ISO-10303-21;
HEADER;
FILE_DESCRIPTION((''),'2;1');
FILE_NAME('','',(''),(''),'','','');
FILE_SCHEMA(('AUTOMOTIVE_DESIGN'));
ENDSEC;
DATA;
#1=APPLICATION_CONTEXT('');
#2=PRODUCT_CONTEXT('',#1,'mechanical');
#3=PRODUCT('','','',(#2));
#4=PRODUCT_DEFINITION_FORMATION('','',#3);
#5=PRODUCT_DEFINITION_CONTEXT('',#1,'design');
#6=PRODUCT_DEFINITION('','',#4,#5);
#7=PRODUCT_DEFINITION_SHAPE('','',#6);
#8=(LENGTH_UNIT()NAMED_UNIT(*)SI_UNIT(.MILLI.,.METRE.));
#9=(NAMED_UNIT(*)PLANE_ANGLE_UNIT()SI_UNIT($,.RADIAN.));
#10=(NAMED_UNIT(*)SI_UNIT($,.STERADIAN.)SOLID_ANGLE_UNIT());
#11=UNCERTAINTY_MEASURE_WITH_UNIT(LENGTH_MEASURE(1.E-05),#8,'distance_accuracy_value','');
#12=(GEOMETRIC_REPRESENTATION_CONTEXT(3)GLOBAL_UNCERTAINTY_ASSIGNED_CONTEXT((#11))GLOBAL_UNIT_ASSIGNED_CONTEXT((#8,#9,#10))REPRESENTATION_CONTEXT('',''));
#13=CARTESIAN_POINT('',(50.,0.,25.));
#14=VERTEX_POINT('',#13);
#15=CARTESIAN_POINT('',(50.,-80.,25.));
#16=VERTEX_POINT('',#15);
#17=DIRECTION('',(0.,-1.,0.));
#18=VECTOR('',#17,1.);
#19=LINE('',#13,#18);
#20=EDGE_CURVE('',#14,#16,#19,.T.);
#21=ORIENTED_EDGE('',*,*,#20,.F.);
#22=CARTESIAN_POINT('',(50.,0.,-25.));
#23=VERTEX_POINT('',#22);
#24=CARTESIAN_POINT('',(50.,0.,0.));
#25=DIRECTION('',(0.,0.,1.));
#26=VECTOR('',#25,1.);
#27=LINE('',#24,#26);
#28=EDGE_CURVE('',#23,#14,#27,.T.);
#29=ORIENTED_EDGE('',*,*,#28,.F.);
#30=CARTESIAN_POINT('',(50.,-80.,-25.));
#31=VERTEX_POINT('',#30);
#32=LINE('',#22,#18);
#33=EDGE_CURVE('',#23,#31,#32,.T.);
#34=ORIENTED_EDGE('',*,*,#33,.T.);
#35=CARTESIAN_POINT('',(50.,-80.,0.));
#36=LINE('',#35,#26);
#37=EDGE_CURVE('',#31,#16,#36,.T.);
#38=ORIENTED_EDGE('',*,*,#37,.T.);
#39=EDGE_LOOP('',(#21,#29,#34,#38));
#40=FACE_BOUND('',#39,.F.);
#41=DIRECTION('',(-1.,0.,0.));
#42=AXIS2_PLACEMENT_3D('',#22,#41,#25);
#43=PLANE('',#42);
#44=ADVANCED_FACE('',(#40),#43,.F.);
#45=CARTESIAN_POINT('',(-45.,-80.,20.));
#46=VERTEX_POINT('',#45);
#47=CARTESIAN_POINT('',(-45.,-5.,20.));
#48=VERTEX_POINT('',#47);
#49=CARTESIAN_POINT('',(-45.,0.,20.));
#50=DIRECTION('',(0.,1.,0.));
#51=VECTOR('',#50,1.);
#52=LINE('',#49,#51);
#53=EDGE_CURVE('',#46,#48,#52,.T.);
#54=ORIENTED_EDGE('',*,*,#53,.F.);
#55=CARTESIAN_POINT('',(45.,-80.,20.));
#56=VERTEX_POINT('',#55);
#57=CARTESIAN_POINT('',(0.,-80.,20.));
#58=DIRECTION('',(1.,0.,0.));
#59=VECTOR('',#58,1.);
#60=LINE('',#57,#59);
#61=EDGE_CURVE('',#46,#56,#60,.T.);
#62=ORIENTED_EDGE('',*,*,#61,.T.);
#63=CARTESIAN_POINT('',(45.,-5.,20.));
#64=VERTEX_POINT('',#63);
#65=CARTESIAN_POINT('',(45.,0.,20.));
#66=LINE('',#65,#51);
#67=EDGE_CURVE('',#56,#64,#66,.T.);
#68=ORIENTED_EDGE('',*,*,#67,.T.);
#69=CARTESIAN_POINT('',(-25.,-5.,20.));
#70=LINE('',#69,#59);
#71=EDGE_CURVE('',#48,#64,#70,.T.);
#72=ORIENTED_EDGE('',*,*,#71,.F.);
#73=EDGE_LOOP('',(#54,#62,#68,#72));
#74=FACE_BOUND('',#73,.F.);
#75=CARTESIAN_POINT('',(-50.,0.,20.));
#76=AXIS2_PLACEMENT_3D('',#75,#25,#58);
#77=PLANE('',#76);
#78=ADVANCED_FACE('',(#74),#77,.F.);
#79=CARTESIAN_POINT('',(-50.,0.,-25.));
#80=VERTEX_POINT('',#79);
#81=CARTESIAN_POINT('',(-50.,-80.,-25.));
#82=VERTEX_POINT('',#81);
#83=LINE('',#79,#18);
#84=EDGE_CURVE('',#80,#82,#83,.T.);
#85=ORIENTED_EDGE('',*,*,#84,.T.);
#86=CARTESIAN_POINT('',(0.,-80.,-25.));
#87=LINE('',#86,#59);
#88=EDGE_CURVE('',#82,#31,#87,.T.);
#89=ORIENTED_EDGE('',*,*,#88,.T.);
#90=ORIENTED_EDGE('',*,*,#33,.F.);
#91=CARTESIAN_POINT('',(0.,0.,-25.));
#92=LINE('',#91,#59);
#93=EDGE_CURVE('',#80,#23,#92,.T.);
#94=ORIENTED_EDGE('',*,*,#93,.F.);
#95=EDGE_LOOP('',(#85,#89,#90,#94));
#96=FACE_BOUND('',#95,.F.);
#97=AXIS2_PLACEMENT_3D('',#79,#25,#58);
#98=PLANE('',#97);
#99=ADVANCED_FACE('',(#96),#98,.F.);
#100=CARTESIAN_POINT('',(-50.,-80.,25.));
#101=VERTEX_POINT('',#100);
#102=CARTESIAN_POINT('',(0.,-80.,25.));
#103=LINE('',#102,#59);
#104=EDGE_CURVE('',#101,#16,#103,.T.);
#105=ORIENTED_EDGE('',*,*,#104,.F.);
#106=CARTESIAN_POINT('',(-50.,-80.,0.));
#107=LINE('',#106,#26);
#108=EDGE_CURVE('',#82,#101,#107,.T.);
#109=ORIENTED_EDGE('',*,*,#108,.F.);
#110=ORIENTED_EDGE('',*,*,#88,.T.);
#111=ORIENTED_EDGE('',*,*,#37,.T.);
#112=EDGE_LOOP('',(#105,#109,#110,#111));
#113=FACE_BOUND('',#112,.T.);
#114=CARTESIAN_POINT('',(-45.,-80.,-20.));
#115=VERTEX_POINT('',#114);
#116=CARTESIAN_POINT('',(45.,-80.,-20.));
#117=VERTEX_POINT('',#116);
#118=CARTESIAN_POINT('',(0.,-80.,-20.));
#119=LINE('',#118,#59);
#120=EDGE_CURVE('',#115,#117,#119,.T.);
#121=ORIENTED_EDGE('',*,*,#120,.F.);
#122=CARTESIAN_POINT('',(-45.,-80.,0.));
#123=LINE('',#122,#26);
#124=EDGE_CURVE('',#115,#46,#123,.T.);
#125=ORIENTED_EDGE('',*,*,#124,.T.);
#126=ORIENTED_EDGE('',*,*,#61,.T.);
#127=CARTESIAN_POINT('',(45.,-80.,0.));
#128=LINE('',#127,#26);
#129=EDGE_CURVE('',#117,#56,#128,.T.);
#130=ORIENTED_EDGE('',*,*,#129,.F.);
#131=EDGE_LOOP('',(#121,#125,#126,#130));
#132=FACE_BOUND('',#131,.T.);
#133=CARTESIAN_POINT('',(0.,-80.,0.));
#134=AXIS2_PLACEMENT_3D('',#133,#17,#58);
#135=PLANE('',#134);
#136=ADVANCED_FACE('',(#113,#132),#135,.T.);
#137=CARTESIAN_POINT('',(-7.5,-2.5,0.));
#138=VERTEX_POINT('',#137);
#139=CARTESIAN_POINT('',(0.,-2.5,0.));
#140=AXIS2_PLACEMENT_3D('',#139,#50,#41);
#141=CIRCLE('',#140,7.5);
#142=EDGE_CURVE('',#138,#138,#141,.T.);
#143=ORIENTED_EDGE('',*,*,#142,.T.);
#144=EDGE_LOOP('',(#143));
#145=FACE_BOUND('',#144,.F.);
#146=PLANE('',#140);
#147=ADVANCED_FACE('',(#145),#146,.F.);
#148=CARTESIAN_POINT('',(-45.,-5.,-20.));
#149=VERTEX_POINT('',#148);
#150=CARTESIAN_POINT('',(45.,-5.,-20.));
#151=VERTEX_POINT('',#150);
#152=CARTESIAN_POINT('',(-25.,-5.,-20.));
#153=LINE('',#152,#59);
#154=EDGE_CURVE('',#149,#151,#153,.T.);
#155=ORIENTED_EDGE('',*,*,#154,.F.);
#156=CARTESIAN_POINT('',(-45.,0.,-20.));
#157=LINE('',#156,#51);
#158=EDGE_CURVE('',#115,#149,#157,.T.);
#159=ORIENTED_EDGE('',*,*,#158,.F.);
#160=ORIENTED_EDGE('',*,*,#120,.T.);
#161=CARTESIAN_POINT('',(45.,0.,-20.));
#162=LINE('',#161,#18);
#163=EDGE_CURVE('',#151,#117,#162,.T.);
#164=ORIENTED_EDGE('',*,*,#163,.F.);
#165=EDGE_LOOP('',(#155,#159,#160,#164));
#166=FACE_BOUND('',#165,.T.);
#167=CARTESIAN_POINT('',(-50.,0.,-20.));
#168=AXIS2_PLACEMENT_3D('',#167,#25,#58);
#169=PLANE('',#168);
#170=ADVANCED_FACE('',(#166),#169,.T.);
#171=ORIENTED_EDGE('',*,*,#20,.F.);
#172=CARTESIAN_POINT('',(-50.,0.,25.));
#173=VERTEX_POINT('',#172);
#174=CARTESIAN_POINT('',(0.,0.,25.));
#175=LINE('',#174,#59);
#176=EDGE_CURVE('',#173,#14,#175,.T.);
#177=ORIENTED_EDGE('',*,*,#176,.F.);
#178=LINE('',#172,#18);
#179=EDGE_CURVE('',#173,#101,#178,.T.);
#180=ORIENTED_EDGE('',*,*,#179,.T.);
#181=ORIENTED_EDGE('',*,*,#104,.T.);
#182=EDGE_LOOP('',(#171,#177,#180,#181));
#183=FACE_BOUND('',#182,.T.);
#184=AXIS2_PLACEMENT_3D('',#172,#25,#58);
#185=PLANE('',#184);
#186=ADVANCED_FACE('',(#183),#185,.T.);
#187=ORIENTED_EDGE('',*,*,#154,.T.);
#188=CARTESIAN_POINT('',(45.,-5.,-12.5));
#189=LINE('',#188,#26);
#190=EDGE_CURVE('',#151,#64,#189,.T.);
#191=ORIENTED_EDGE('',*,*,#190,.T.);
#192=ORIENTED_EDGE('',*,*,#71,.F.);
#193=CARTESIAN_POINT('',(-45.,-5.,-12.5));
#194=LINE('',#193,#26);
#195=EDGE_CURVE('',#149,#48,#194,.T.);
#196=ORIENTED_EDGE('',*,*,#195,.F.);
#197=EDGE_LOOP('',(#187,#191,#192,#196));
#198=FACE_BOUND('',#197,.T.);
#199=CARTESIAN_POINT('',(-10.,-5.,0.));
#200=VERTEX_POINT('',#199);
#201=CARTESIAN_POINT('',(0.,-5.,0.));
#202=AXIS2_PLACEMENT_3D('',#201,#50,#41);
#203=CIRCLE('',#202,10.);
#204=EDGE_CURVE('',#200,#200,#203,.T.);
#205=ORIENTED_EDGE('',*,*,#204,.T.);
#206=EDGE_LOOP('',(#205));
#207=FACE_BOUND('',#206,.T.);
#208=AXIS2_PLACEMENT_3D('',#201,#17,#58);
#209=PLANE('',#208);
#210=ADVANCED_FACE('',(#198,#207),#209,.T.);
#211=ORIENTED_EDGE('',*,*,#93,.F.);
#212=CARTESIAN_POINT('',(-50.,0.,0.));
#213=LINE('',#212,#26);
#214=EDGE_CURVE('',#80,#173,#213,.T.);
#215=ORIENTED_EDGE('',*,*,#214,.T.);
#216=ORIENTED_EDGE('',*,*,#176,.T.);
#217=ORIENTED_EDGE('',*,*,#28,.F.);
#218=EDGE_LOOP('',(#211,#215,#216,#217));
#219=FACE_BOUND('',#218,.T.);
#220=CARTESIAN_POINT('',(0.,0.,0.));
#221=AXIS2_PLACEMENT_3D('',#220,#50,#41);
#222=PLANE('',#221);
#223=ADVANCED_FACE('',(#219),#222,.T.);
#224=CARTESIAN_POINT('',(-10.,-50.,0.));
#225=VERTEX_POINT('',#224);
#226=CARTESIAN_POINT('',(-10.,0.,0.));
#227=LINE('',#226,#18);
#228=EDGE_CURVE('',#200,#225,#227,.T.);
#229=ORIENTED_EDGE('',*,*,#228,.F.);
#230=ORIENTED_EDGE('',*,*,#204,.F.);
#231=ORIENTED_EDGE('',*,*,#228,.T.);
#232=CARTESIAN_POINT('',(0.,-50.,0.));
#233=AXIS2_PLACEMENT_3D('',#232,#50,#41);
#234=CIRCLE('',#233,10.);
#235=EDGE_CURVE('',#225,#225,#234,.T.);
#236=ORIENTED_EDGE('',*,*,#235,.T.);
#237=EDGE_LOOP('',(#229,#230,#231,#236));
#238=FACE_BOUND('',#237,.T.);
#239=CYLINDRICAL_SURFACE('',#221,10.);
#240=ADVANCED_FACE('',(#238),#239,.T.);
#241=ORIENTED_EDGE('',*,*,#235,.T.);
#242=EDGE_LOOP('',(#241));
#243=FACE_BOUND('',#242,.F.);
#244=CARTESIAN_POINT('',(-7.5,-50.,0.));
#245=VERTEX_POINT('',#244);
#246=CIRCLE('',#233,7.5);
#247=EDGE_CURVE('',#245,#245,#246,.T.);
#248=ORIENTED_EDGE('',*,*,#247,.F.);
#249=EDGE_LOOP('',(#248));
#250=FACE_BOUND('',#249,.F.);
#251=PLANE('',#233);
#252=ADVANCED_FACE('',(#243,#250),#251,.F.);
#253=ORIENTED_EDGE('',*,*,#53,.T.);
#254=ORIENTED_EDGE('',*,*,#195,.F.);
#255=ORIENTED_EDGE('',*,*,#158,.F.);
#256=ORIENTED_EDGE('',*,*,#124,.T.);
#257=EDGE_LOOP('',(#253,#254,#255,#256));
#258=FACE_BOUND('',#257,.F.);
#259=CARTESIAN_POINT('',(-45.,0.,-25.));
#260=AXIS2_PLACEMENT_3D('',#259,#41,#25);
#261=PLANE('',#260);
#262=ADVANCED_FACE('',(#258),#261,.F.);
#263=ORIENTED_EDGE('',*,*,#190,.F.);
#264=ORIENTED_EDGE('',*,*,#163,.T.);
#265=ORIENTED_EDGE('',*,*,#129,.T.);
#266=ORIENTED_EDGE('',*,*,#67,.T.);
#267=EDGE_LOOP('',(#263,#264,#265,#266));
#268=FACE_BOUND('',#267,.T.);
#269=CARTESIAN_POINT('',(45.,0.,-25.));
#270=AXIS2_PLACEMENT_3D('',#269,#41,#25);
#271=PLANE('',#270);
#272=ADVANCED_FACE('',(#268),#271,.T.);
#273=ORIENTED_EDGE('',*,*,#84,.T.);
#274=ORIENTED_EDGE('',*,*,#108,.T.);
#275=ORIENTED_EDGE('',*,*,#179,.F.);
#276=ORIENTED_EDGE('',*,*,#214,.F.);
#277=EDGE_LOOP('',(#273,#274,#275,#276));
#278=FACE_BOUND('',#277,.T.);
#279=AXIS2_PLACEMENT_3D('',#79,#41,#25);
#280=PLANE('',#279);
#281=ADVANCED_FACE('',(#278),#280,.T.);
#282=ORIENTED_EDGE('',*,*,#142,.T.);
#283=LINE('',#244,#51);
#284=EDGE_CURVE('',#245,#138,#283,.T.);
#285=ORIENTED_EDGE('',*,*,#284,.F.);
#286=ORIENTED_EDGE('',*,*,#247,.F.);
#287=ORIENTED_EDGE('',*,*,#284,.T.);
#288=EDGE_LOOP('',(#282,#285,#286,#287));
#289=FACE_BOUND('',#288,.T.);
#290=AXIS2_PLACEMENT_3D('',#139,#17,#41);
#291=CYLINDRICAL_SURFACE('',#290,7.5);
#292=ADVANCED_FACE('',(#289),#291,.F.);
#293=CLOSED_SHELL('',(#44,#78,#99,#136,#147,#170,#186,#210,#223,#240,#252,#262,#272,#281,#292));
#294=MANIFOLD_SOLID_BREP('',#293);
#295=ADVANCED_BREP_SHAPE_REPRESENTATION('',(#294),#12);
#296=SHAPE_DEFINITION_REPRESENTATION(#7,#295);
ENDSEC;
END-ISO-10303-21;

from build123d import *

# Parameters (mm, degrees)
F0_W        = 100
F0_H        = 50
F1_DEPTH    = 80
F2_T        = -5
F3_R        = 10
F4_DEPTH    = 50
F5_T        = 2.5
F5_T3_DEPTH = 80
F5_T5_DEPTH = 45
F5_T7_DEPTH = 95


# Not quite as in the source:
# - a shell that OpenCascade refuses in one call is made with other operations: the cavity is built on its own and cut out


with BuildPart() as f1:
    # F0 (on Front) → F1 (new body)
    with BuildSketch(Plane.XZ):
        Rectangle(F0_W, F0_H)
    extrude(amount=F1_DEPTH)

    # F2
    f2_openings = [f1.faces().sort_by_distance(p)[0] for p in [
        (0, -80, 0),
    ]]
    offset(amount=F2_T, openings=f2_openings)

    # F3 (on face) → F4 (join)
    with BuildSketch(Plane(origin=(0, 0, 0), x_dir=(-1, 0, 0), z_dir=(0, 1, 0))):
        Circle(F3_R)
    extrude(amount=-F4_DEPTH)

    # F5: shell of thickness 2.5, made by hand


with BuildPart() as f5_core1:
    # F5_t2: copy of F1
    add(f1.part)

    # the walls: a layer under each face that stays
    f5_faces = [f5_core1.faces().sort_by_distance(p)[0] for p in [
        (-50, -40, 0),
        (0, -40, 25),
        (0, -40, -25),
        (0, 0, 0),
        (-42.8571428571, -80, -21.4285714286),
        (50, -40, 0),
        (-45, -42.5, 0),
        (0, -42.5, 20),
        (45, -42.5, 0),
        (0, -42.5, -20),
        (-30, -5, -13.3333333333),
        (10, -27.5, 0),
    ]]
    thicken(f5_faces, amount=-F5_T, mode=Mode.SUBTRACT)

    # F5_s4 → F5_t3 (cut)
    with BuildSketch(Plane.XZ.offset(2.5)):
        Polygon((-44.975, -19.975), (-47.5, -20), (-47.5, -22.5), (-45, -22.5), align=None)
        Polygon((-44.975, 19.975), (-47.5, 20), (-47.5, 22.5), (-45, 22.5), align=None)
        Polygon((44.975, 19.975), (45, 22.5), (47.5, 22.5), (47.5, 20), align=None)
        Polygon((44.975, -19.975), (47.5, -20), (47.5, -22.5), (45, -22.5), align=None)
    extrude(amount=F5_T3_DEPTH, mode=Mode.SUBTRACT)

    # F5_s6 → F5_t5 (cut)
    with BuildSketch(Plane.XY.offset(-22.5)):
        Polygon((-44.975, -5.025), (-47.5, -5), (-47.5, -2.5), (-45, -2.5), align=None)
        Polygon((44.975, -5.025), (47.5, -5), (47.5, -2.5), (45, -2.5), align=None)
    extrude(amount=F5_T5_DEPTH, mode=Mode.SUBTRACT)

    # F5_s8 → F5_t7 (cut)
    with BuildSketch(Plane.YZ.offset(-47.5)):
        Polygon((-5.025, 19.975), (-5, 22.5), (-2.5, 22.5), (-2.5, 20), align=None)
        Polygon((-5.025, -19.975), (-5, -22.5), (-2.5, -22.5), (-2.5, -20), align=None)
    extrude(amount=F5_T7_DEPTH, mode=Mode.SUBTRACT)

    # F5_s9 → F5_t10 (revolve, cut)
    with BuildSketch(Plane.XY):
        Polygon((-10.025, -5.025), (-10, -2.5), (-7.5, -2.5), (-7.5, -5), align=None)
    revolve(axis=Axis((0, -5, 0), (0, 1, 0)), mode=Mode.SUBTRACT)


with BuildPart() as f1_1:
    add(f1.part)

    # what is left inside the walls is the cavity
    f5_cavity = [f5_core1.part.solids().sort_by_distance(p)[0] for p in [
        (7.475, -18.333333, 0),
    ]]
    add(f5_cavity, mode=Mode.SUBTRACT)


solid = f1_1.part
